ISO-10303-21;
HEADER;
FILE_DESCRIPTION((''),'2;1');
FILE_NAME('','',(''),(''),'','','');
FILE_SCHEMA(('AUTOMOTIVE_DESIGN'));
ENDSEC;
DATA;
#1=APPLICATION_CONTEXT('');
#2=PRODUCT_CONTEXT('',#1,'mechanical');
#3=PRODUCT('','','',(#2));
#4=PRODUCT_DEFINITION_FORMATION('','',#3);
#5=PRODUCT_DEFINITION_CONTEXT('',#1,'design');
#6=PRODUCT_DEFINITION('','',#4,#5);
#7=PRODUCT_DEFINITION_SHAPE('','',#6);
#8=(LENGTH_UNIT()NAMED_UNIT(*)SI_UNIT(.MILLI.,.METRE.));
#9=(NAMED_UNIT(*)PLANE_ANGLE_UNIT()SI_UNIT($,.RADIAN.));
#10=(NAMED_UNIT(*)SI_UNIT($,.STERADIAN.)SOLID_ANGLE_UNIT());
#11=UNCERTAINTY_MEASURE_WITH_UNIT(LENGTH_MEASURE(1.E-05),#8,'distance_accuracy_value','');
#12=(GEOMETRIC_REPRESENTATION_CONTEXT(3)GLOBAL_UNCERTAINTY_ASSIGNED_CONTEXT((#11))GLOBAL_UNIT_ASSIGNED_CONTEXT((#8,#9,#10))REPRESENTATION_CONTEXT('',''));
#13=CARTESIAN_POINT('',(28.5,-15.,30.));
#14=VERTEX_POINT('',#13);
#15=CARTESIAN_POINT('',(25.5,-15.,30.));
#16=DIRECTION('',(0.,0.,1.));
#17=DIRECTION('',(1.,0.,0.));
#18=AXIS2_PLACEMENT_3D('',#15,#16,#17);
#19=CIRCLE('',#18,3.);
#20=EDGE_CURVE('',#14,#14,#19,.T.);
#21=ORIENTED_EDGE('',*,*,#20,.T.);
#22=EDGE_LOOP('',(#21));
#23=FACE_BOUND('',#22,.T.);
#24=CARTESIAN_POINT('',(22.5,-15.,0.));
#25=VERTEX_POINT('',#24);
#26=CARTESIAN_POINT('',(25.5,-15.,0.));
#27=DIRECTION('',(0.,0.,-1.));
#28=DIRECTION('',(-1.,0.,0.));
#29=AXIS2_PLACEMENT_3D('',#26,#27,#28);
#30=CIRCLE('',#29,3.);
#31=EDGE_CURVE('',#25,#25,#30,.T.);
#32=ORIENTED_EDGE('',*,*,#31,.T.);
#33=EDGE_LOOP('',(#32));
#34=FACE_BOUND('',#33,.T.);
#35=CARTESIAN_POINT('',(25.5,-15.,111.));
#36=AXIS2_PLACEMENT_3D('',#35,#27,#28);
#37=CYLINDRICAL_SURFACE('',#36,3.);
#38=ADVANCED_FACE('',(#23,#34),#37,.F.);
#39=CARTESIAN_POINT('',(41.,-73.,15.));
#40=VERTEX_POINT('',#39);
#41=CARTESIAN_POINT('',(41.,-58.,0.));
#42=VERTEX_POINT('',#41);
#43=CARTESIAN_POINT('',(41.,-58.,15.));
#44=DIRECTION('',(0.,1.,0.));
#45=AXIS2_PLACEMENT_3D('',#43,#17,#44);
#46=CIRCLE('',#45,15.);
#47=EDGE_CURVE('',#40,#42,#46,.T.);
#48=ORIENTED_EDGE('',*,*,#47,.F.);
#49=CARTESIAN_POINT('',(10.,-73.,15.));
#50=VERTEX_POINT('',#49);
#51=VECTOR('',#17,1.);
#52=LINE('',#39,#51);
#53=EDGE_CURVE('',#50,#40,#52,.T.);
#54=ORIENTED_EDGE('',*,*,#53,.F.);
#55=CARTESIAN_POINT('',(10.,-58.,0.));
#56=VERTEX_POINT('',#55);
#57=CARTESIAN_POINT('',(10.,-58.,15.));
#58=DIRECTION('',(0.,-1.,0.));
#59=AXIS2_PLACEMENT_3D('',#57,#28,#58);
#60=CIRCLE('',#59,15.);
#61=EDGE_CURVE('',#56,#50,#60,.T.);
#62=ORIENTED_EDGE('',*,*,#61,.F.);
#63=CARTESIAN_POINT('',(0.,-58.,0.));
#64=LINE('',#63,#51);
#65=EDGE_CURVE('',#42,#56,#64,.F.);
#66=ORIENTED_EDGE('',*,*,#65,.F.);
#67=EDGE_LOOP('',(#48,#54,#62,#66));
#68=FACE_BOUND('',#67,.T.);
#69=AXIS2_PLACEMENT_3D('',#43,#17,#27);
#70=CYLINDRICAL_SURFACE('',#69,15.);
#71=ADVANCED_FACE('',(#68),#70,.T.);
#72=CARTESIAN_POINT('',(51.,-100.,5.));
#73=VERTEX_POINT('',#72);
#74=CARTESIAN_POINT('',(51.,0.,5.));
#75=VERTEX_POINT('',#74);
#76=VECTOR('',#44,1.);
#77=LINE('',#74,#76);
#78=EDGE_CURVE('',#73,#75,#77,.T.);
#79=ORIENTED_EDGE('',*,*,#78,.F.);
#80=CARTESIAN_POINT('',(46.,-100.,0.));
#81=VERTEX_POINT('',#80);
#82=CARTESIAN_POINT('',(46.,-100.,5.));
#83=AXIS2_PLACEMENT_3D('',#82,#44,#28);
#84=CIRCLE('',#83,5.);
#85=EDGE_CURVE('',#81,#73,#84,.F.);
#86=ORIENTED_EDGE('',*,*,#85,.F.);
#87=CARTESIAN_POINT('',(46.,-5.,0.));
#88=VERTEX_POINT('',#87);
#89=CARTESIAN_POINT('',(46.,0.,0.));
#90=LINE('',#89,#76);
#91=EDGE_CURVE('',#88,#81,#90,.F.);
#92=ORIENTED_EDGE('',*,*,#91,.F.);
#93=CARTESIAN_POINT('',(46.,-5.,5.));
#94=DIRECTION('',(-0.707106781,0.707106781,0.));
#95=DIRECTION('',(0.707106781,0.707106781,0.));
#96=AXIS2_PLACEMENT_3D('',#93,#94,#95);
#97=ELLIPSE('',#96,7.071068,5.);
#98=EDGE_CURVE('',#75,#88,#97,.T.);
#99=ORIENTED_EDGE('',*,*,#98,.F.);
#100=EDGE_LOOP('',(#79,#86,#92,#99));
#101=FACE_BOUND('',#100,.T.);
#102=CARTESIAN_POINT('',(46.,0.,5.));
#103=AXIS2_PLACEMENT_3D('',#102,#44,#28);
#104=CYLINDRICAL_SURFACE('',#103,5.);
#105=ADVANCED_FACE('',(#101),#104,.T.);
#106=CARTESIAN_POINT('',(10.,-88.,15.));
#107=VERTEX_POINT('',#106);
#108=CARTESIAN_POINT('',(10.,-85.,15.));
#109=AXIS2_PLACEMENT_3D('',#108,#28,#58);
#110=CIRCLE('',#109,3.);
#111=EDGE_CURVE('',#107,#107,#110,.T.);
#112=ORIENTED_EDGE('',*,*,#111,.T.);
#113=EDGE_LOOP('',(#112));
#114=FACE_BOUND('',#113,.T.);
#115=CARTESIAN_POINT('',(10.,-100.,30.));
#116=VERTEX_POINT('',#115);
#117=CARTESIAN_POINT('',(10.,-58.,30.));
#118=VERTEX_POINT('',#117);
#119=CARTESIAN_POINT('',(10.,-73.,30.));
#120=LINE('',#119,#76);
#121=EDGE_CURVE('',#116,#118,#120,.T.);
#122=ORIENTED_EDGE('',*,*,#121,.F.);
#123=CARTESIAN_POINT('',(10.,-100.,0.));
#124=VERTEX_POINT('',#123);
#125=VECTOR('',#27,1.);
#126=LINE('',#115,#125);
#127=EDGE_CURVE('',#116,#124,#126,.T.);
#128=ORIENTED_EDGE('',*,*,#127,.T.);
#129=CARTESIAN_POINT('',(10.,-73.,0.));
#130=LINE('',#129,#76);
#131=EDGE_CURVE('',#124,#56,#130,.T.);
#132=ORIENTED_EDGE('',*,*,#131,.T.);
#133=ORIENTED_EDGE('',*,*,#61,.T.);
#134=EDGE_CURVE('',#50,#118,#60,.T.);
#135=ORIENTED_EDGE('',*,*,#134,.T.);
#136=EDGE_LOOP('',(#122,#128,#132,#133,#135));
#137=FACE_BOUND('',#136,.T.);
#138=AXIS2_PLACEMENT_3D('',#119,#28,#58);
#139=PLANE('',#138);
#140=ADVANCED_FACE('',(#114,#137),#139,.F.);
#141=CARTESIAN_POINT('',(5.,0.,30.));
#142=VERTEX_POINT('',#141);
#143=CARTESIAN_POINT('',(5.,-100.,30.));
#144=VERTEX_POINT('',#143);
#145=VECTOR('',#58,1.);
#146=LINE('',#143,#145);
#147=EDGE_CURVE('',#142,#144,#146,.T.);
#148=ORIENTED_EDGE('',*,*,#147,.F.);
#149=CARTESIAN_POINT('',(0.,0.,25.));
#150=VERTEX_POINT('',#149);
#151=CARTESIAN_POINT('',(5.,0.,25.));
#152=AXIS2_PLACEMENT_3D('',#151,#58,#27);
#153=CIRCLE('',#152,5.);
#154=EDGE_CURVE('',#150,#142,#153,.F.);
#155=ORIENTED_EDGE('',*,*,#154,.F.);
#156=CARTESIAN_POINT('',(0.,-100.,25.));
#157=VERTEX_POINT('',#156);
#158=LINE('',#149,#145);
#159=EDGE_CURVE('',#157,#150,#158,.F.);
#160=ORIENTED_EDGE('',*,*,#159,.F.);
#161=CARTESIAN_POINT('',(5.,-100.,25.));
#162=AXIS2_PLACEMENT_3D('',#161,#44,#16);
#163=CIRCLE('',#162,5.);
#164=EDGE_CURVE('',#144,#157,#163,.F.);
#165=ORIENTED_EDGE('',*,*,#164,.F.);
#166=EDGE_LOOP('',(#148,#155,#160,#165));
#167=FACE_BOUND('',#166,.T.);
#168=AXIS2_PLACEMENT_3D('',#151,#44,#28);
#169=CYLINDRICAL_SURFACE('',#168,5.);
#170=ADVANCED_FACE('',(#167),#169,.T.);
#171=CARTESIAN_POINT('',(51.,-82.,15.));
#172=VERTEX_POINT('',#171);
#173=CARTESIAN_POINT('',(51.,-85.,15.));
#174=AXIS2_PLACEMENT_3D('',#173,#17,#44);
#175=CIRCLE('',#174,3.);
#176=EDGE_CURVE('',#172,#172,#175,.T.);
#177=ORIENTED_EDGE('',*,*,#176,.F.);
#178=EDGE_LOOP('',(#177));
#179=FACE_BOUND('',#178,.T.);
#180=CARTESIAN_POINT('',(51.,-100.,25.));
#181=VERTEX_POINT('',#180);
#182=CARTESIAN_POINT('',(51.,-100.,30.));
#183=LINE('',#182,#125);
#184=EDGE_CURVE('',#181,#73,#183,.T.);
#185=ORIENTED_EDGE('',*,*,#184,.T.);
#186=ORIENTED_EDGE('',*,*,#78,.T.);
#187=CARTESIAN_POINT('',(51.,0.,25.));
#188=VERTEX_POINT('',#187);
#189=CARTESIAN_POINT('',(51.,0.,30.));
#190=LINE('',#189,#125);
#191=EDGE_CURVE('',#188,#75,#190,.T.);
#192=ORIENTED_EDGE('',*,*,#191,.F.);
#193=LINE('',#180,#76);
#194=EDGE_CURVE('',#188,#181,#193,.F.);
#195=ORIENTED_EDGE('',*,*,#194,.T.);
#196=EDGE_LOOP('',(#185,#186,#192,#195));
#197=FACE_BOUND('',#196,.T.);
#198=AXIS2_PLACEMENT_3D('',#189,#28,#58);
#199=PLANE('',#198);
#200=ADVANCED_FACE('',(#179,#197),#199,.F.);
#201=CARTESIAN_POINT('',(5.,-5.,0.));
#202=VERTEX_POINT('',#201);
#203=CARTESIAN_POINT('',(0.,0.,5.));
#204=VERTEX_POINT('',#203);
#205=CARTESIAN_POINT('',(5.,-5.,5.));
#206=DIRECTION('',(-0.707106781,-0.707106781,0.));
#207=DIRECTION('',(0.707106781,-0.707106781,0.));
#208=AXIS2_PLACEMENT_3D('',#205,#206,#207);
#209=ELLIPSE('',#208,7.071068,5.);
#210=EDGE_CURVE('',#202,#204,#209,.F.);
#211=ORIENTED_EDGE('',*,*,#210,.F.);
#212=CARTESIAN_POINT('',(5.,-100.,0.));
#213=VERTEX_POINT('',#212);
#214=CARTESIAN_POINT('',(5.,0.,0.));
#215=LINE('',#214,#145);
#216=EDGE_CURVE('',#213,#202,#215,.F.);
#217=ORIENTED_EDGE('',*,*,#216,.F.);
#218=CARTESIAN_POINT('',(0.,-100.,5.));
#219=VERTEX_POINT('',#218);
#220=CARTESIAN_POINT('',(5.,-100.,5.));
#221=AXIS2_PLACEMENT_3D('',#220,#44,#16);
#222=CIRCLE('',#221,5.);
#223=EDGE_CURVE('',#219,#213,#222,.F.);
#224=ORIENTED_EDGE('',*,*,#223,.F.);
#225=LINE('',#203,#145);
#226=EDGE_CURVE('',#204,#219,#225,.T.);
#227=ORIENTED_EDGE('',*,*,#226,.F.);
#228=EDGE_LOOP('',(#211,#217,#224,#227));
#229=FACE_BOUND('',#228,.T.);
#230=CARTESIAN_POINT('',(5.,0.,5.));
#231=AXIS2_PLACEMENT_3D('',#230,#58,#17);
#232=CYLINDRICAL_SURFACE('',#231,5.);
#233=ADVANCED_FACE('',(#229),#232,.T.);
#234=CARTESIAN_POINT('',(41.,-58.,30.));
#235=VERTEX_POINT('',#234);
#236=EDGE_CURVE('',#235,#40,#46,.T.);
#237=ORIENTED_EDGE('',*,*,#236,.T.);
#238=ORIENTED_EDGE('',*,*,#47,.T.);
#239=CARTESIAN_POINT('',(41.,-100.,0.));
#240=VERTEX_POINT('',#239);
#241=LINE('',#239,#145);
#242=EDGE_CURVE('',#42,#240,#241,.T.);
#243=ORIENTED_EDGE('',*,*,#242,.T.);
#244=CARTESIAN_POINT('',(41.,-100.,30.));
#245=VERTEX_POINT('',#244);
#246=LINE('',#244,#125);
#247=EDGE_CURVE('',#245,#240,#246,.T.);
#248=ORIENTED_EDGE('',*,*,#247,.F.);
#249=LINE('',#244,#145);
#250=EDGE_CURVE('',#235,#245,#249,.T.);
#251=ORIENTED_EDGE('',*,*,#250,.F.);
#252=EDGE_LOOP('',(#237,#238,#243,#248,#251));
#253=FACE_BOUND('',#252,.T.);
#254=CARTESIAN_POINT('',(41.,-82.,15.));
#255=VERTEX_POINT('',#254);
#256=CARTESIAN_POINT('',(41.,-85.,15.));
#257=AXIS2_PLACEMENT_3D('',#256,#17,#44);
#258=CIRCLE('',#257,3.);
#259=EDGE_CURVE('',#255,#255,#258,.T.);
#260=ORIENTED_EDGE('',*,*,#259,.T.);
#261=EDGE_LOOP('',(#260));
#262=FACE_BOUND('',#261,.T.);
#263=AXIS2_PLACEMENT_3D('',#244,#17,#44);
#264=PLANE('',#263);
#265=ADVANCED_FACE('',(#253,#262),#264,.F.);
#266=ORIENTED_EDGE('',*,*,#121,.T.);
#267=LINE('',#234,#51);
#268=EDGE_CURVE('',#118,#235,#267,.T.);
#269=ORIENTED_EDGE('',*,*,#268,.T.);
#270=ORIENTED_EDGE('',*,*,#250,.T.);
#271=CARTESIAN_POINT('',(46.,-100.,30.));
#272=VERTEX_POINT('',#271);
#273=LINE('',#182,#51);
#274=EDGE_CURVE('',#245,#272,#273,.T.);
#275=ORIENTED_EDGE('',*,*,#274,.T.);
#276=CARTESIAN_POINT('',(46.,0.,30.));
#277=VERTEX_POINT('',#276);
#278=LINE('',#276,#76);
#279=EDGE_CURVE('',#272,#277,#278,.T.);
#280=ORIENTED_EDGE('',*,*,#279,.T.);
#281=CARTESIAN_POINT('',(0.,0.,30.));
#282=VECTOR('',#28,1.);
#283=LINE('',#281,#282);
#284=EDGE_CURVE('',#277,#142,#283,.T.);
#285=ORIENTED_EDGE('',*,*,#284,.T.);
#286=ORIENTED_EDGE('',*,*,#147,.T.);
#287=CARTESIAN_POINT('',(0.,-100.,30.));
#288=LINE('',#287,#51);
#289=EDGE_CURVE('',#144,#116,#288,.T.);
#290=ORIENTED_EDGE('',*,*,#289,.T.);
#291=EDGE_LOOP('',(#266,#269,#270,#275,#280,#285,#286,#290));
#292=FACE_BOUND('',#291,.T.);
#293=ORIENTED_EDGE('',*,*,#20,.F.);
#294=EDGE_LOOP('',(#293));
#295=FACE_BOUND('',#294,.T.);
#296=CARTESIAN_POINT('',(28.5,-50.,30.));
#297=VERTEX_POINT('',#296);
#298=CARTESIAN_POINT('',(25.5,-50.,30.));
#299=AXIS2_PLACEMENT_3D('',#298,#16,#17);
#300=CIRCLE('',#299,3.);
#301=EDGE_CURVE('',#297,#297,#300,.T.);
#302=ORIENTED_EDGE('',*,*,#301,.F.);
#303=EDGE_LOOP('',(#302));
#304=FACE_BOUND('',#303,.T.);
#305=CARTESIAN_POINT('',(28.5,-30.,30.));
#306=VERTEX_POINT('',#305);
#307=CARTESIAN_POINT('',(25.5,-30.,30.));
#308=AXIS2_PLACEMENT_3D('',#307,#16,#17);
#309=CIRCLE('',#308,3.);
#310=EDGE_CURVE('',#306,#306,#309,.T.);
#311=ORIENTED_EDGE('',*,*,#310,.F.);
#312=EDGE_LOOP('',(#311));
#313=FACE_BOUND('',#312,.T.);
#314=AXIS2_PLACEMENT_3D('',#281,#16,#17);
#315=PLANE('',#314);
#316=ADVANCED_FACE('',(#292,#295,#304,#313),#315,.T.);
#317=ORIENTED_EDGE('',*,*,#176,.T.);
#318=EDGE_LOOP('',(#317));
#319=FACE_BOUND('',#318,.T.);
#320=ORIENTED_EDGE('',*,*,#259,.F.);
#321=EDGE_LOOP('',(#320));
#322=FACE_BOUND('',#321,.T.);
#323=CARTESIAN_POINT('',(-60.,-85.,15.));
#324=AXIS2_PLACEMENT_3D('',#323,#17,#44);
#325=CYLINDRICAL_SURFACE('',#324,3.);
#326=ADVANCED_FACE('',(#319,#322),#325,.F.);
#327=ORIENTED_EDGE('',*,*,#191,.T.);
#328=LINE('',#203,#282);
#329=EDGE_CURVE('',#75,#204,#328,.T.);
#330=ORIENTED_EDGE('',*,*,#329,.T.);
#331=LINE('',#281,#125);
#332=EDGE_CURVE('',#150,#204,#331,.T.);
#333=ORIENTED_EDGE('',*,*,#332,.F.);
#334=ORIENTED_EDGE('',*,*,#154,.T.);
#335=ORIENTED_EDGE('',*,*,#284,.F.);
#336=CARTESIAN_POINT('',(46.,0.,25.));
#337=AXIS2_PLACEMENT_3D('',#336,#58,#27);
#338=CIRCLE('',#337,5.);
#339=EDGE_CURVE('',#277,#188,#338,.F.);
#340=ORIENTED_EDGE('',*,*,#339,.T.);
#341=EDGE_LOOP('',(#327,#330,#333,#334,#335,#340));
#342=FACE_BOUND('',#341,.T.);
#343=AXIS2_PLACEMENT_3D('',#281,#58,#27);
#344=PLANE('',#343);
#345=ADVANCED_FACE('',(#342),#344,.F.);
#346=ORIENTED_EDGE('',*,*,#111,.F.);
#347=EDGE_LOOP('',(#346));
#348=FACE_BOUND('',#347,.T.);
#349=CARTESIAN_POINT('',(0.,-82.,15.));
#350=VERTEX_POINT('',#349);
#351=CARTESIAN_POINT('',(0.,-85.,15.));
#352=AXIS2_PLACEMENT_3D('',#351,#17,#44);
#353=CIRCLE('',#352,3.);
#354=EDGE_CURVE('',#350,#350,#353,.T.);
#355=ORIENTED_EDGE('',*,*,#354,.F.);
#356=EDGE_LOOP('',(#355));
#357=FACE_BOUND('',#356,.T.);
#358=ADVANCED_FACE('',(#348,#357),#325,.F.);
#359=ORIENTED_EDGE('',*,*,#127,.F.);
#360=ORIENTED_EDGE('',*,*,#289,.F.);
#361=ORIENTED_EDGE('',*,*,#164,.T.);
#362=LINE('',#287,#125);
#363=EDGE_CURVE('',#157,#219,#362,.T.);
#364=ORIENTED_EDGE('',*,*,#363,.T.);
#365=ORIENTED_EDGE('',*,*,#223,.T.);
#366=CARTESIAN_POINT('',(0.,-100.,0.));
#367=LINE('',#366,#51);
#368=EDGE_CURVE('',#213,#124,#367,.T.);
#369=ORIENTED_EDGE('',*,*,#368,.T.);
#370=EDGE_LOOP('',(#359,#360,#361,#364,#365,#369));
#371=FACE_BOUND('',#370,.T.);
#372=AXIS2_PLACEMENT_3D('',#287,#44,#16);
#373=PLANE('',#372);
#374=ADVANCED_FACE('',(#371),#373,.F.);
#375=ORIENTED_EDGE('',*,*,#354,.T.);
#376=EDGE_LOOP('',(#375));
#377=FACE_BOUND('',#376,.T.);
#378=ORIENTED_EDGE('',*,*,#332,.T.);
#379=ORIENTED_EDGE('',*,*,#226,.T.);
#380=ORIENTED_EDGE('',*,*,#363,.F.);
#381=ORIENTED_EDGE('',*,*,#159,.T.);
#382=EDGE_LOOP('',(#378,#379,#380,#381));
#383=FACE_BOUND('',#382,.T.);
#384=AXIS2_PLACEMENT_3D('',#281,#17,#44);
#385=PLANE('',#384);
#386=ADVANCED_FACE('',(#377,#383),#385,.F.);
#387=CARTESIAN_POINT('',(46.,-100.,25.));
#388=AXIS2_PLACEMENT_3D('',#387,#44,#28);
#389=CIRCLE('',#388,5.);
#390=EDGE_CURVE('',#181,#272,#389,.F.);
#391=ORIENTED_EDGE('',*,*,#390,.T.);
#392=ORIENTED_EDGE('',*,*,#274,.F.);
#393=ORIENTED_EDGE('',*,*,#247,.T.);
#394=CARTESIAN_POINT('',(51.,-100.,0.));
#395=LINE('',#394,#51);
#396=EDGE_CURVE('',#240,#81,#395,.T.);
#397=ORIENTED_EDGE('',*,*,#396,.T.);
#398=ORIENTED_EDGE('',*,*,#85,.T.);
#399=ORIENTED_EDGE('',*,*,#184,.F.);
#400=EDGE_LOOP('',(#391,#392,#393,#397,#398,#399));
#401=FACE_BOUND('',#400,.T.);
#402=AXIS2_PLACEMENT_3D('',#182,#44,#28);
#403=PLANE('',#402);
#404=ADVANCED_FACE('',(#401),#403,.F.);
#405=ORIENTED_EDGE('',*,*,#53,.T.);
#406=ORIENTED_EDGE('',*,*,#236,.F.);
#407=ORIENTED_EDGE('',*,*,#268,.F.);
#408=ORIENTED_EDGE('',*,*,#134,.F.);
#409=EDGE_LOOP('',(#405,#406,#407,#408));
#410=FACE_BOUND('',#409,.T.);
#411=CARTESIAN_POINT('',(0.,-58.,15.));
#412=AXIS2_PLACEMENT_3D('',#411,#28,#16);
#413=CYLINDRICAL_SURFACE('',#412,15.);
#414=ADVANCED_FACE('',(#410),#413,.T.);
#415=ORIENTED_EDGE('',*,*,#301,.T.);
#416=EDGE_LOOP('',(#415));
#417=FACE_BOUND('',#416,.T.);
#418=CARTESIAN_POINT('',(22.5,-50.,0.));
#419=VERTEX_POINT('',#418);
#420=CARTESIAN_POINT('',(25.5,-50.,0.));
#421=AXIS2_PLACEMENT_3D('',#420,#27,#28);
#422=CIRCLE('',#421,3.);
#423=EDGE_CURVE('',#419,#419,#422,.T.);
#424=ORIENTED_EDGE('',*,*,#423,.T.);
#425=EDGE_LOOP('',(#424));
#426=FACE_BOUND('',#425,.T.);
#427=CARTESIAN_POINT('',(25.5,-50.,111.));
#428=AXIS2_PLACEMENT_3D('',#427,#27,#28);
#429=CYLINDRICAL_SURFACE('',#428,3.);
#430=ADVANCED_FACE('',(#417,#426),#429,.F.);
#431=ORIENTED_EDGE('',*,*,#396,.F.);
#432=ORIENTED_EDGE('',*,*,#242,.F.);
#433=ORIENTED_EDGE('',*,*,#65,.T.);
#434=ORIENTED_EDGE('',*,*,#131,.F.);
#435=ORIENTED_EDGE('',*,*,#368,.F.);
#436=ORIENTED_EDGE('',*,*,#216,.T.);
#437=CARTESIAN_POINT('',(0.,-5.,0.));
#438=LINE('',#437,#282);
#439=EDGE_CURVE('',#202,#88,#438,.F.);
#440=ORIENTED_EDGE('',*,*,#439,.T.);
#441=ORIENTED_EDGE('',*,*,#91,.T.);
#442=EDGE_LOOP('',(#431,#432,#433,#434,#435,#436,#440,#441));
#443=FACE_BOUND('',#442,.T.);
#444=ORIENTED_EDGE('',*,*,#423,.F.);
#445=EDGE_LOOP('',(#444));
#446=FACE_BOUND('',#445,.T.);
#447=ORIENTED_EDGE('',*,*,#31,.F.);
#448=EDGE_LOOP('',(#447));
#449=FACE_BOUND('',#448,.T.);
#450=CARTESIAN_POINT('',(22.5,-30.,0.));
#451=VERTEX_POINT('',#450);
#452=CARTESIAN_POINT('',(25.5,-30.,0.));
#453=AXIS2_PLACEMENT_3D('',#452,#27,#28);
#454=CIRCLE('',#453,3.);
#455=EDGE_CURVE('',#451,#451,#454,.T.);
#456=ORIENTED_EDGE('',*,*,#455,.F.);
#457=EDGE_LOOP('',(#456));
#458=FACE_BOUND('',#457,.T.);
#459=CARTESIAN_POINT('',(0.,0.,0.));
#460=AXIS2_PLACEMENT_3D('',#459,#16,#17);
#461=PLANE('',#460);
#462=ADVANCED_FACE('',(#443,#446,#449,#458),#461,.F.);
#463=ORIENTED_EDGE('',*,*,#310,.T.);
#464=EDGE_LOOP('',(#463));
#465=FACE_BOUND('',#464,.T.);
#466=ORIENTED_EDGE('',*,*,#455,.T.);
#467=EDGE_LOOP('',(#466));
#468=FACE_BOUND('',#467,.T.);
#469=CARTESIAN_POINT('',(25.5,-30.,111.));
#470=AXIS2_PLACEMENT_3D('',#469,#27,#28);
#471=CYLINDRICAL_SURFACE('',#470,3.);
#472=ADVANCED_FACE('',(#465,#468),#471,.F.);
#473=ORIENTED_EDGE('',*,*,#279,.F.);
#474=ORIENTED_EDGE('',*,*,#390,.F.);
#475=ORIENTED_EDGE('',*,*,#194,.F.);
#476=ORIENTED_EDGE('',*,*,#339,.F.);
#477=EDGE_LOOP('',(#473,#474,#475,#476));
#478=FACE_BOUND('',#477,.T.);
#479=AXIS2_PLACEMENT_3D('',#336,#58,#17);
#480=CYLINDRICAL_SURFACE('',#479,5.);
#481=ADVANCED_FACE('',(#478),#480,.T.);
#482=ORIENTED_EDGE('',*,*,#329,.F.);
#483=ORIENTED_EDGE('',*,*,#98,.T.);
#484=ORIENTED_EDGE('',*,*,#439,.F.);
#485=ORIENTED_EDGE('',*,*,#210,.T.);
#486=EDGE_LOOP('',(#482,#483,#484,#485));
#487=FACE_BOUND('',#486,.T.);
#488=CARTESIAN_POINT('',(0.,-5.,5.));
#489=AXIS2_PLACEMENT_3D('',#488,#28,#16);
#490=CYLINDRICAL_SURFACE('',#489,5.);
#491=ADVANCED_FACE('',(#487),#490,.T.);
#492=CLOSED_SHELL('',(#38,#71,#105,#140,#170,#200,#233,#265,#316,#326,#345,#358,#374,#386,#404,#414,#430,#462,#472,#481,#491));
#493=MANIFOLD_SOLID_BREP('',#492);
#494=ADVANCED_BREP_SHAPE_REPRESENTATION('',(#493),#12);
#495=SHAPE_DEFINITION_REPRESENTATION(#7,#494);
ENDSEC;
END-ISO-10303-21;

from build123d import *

# Parameters (mm, degrees)
BOSS_EXTRUDE1_DEPTH = 30
SKETCH2_R           = 3
CUT_EXTRUDE1_DEPTH  = 111
SKETCH3_R           = 3
CUT_EXTRUDE2_DEPTH  = 111
FILLET1_R           = 5
FILLET2_R           = 5
FILLET3_R           = 15


with BuildPart() as part:
    # Sketch1 → Boss-Extrude1 (new body)
    with BuildSketch(Plane.XY):
        Polygon((0, 0), (51, 0), (51, -100), (41, -100), (41, -73), (10, -73), (10, -100), (0, -100), align=None)
    extrude(amount=BOSS_EXTRUDE1_DEPTH)

    # Sketch2 → Cut-Extrude1 (cut)
    with BuildSketch(Plane(origin=(51, 0, 0), x_dir=(0, 0, -1), z_dir=(1, 0, 0))):
        with Locations(Location((-15, -85, 0), (0, 0, 90))):
            Circle(SKETCH2_R)
    extrude(amount=-CUT_EXTRUDE1_DEPTH, mode=Mode.SUBTRACT)

    # Sketch3 → Cut-Extrude2 (cut)
    with BuildSketch(Plane(origin=(0, 0, 0), x_dir=(-1, 0, 0), z_dir=(0, 0, -1))):
        with Locations((-25.5, -15)):
            Circle(SKETCH3_R)
        with Locations((-25.5, -30)):
            Circle(SKETCH3_R)
        with Locations((-25.5, -50)):
            Circle(SKETCH3_R)
    extrude(amount=-CUT_EXTRUDE2_DEPTH, mode=Mode.SUBTRACT)

    # Fillet1
    fillet1_edges = [part.edges().sort_by_distance(p)[0] for p in [
        (0, -50, 0),
        (25.5, 0, 0),
        (51, -50, 0),
    ]]
    fillet(fillet1_edges, radius=FILLET1_R)

    # Fillet2
    fillet2_edges = [part.edges().sort_by_distance(p)[0] for p in [
        (51, -50, 30),
        (0, -50, 30),
    ]]
    fillet(fillet2_edges, radius=FILLET2_R)

    # Fillet3
    fillet3_edges = [part.edges().sort_by_distance(p)[0] for p in [
        (25.5, -73, 30),
        (25.5, -73, 0),
    ]]
    fillet(fillet3_edges, radius=FILLET3_R - 0.0001)  # a hair under: the kernel refuses the full size


solid = part.part
